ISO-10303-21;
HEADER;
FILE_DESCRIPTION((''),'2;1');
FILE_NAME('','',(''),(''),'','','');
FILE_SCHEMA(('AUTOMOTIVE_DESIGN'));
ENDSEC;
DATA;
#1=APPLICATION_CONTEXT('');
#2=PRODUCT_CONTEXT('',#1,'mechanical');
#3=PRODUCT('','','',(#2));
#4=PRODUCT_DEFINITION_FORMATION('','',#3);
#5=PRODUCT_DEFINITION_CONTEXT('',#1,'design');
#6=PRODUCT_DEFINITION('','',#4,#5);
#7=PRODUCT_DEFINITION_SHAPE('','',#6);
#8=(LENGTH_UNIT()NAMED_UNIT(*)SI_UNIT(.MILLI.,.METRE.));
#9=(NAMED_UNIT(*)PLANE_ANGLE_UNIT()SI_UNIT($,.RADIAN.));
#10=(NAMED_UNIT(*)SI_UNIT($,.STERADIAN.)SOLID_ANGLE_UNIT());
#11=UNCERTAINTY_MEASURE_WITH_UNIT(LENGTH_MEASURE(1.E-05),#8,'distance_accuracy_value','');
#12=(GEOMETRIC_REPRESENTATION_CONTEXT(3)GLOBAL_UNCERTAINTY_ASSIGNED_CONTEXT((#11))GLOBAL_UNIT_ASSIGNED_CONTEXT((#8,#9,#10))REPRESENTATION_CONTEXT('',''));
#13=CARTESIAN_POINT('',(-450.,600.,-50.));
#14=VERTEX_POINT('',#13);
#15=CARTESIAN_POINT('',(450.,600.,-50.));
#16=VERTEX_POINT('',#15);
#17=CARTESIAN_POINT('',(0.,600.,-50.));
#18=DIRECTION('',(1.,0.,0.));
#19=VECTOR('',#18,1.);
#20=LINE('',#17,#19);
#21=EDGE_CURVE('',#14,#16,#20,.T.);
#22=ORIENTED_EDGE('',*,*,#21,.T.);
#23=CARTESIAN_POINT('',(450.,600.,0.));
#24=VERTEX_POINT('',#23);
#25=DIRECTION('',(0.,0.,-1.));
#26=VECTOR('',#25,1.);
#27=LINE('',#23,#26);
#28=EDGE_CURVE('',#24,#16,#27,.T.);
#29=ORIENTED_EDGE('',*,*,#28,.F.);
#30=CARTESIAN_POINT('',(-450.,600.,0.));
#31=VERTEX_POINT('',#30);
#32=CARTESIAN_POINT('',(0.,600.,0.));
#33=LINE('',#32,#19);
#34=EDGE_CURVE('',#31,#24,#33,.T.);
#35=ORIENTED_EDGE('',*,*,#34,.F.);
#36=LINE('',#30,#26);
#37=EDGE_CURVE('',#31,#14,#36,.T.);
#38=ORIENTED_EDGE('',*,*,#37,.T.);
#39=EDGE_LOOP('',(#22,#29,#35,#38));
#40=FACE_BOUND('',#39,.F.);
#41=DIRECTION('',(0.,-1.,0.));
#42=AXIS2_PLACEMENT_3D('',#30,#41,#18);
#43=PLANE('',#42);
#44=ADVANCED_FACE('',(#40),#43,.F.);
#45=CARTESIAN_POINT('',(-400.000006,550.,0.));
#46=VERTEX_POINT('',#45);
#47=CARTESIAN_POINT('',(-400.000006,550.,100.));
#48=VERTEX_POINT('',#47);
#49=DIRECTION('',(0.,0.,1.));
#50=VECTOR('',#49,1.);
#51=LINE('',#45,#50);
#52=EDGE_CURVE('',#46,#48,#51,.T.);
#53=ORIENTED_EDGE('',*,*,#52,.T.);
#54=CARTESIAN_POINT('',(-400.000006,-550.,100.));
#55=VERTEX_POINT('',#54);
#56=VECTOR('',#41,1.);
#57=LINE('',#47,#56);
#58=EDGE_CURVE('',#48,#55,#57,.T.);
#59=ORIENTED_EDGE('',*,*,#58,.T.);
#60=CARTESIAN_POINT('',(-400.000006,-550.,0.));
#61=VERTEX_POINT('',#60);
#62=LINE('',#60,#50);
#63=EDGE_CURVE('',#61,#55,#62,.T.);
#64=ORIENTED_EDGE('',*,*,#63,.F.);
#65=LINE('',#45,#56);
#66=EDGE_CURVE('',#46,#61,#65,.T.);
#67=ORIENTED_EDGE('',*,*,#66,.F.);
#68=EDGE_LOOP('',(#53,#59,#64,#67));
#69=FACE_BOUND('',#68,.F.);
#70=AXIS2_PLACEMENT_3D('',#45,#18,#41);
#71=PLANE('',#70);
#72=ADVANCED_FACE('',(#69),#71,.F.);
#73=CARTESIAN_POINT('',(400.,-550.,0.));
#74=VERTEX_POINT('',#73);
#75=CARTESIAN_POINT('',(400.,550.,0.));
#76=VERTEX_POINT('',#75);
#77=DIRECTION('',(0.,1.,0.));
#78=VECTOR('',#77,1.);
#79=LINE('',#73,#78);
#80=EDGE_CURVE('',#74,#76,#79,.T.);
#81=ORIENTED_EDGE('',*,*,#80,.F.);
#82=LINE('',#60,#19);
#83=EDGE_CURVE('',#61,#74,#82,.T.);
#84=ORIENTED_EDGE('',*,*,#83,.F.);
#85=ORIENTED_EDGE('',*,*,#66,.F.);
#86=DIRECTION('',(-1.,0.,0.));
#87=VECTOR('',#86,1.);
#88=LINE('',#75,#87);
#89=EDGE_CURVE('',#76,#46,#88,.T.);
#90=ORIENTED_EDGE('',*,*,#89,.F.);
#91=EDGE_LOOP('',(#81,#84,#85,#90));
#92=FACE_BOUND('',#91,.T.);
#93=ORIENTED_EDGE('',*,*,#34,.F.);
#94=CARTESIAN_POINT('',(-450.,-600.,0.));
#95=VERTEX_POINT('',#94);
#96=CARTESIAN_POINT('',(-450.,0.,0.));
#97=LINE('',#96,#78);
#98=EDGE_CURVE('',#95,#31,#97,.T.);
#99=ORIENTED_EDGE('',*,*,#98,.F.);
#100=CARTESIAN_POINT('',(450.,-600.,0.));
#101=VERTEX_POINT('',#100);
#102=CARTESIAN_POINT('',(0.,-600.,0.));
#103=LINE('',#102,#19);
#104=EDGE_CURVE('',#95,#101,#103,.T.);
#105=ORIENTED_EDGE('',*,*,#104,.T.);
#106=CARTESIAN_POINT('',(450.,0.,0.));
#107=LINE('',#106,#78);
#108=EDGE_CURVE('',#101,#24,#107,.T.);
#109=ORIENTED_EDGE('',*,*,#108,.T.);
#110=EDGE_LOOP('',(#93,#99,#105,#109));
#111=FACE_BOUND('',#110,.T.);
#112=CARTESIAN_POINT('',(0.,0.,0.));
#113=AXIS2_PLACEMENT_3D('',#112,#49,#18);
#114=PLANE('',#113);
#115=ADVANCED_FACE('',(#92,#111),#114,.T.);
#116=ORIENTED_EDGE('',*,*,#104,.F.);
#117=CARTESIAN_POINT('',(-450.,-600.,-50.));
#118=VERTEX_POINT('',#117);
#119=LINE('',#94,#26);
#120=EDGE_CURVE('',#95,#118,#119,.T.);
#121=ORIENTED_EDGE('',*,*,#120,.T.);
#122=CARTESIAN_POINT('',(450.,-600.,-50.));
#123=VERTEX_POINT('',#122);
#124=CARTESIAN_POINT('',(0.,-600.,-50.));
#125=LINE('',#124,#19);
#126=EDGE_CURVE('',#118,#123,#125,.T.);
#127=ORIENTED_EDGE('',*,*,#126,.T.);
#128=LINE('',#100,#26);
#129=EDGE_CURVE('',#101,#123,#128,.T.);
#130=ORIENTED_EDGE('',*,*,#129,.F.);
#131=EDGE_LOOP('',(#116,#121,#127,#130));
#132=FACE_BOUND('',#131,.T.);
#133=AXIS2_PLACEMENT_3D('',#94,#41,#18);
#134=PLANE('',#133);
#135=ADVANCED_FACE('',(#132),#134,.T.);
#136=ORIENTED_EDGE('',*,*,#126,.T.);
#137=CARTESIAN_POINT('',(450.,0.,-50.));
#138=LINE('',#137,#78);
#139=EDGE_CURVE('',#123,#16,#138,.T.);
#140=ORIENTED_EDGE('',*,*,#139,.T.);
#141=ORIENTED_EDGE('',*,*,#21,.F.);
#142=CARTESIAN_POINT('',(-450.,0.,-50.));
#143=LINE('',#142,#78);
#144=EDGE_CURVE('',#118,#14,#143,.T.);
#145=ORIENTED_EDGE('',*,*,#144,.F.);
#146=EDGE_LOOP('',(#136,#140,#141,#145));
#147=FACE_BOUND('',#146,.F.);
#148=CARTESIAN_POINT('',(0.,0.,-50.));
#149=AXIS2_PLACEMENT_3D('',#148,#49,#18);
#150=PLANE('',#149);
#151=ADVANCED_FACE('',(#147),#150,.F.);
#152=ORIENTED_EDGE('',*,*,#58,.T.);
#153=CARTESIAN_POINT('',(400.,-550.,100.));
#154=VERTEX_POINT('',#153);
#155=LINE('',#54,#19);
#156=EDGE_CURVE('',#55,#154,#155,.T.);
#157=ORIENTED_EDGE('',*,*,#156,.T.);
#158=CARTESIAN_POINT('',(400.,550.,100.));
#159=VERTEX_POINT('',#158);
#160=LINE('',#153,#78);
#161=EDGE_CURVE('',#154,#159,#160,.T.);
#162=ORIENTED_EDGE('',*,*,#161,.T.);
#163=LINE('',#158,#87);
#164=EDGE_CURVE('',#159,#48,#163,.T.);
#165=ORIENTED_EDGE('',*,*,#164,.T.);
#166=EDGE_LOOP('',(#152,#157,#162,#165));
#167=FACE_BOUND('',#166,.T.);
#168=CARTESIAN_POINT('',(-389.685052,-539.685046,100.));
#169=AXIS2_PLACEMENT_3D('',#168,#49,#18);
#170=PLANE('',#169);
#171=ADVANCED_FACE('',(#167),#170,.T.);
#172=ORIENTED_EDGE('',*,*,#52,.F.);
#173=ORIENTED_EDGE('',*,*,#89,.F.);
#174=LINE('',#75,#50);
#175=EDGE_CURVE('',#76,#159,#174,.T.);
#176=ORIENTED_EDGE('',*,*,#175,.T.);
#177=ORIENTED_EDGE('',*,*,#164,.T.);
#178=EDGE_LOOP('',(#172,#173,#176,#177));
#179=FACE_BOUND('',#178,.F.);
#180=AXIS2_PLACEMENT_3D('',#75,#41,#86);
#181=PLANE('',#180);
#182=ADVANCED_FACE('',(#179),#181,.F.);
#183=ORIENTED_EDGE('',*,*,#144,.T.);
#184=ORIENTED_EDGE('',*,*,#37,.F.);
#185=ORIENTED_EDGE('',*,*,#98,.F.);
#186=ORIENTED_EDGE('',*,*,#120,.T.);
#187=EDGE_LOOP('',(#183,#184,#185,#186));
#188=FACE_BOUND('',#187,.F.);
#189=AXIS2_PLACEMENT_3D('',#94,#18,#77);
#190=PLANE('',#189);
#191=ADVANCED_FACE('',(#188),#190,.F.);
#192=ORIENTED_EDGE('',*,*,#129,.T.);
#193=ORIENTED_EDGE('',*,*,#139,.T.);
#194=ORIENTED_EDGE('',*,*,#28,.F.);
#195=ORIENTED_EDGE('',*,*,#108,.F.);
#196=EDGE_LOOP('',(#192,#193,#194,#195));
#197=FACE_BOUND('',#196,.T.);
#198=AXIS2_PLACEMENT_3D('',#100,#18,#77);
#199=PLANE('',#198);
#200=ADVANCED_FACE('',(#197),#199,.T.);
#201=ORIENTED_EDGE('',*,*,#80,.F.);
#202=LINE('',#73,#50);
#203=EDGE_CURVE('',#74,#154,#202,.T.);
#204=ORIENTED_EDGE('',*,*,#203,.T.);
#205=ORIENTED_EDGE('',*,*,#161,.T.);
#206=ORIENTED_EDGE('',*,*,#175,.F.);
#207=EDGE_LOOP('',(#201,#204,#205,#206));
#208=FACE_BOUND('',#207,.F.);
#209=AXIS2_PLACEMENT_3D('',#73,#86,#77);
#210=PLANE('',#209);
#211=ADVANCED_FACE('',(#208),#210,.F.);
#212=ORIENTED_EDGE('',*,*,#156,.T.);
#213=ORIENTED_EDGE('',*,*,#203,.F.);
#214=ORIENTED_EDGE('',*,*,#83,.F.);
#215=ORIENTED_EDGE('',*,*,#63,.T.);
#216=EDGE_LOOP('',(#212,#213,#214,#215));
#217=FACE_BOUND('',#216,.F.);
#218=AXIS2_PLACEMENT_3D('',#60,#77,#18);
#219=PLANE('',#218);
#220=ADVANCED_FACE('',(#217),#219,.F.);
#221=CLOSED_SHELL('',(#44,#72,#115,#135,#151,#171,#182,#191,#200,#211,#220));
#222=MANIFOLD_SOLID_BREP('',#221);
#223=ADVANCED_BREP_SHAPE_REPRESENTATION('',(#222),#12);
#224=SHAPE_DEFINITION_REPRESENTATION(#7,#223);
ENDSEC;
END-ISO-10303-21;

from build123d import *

# Parameters (mm, degrees)
F0_W     = 900
F0_H     = 1200
F1_DEPTH = 50
F3_DEPTH = 100


# Not quite as in the source:
# - the program builds the solid bodies; features that only make, move or delete a surface that nothing else refers to are left out


with BuildPart() as f1:
    # F0 (on Top) → F1 (new body)
    with BuildSketch(Plane.XY):
        Rectangle(F0_W, F0_H)
    extrude(amount=-F1_DEPTH)

    # F2 (on face) → F3 (join)
    with BuildSketch(Plane.XY):
        with BuildLine():
            Line((-400.0000059605, -525), (-400.0000059605, -550))
            Line((-400.0000059605, -550), (-375.0000059605, -550))
            ThreePointArc((-375.0000059605, -550), (-382.3223364308, -532.3223304703), (-400.0000059605, -525))
        make_face()
        with BuildLine():
            ThreePointArc((-400.0000059605, -525), (-382.3223364308, -532.3223304703), (-375.0000059605, -550))
            Line((-375.0000059605, -550), (375, -550))
            ThreePointArc((375, -550), (382.3223304703, -532.3223304703), (400, -525))
            Line((400, -525), (400, 550))
            Line((400, 550), (-400.0000059605, 550))
            Line((-400.0000059605, 550), (-400.0000059605, -525))
        make_face()
        with BuildLine():
            ThreePointArc((400, -525), (382.3223304703, -532.3223304703), (375, -550))
            Line((375, -550), (400, -550))
            Line((400, -550), (400, -525))
        make_face()
    extrude(amount=F3_DEPTH)


solid = f1.part
